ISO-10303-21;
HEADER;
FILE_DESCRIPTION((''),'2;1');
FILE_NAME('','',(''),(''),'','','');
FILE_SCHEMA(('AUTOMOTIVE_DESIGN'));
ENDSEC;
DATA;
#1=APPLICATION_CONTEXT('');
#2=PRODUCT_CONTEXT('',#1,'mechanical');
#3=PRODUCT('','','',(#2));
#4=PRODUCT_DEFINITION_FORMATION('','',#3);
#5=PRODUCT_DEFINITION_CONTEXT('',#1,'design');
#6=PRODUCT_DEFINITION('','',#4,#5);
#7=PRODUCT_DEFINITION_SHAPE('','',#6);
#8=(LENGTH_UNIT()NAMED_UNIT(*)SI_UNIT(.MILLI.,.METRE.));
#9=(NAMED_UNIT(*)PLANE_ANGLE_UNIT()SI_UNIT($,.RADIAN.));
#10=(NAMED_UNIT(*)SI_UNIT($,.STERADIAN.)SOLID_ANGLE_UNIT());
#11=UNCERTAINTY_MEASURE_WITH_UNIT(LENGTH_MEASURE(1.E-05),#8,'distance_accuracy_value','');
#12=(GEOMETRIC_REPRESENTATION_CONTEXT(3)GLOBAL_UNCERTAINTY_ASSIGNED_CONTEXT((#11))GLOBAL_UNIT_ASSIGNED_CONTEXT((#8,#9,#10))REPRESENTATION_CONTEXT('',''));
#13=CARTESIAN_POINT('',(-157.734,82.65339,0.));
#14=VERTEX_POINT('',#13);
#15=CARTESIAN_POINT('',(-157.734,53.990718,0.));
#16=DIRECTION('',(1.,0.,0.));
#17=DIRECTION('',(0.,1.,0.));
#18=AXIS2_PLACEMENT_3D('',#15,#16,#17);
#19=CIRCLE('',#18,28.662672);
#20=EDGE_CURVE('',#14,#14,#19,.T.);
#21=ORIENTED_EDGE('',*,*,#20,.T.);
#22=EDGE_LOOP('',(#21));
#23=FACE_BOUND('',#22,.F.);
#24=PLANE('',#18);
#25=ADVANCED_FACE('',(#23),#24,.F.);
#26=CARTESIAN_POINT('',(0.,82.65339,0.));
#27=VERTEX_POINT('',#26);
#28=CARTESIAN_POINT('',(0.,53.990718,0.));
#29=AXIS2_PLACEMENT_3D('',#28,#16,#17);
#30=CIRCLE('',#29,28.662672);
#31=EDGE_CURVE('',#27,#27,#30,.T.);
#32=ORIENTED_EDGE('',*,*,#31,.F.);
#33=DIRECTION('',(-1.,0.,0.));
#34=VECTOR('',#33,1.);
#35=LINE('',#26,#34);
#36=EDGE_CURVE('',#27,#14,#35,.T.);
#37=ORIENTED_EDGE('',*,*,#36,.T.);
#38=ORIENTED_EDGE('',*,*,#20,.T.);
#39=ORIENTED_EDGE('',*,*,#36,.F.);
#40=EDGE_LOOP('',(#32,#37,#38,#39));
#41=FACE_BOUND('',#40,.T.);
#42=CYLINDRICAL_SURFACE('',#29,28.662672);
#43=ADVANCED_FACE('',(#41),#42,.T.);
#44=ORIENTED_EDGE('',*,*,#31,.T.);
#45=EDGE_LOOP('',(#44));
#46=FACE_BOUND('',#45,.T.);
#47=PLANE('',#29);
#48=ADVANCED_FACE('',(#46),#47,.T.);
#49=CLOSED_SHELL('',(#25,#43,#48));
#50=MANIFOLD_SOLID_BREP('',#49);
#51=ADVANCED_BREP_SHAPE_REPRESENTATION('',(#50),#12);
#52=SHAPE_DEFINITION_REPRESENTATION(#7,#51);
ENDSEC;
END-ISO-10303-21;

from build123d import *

# Parameters (mm, degrees)
F2_R     = 28.662672352
F3_DEPTH = 157.734


# Not quite as in the source:
# - the program builds the solid bodies; features that only make, move or delete a surface that nothing else refers to are left out


with BuildPart() as f3:
    # F2 (on Right) → F3 (new body)
    with BuildSketch(Plane.YZ):
        with Locations((53.9907179773, 0)):
            Circle(F2_R)
    extrude(amount=-F3_DEPTH)


solid = f3.part
